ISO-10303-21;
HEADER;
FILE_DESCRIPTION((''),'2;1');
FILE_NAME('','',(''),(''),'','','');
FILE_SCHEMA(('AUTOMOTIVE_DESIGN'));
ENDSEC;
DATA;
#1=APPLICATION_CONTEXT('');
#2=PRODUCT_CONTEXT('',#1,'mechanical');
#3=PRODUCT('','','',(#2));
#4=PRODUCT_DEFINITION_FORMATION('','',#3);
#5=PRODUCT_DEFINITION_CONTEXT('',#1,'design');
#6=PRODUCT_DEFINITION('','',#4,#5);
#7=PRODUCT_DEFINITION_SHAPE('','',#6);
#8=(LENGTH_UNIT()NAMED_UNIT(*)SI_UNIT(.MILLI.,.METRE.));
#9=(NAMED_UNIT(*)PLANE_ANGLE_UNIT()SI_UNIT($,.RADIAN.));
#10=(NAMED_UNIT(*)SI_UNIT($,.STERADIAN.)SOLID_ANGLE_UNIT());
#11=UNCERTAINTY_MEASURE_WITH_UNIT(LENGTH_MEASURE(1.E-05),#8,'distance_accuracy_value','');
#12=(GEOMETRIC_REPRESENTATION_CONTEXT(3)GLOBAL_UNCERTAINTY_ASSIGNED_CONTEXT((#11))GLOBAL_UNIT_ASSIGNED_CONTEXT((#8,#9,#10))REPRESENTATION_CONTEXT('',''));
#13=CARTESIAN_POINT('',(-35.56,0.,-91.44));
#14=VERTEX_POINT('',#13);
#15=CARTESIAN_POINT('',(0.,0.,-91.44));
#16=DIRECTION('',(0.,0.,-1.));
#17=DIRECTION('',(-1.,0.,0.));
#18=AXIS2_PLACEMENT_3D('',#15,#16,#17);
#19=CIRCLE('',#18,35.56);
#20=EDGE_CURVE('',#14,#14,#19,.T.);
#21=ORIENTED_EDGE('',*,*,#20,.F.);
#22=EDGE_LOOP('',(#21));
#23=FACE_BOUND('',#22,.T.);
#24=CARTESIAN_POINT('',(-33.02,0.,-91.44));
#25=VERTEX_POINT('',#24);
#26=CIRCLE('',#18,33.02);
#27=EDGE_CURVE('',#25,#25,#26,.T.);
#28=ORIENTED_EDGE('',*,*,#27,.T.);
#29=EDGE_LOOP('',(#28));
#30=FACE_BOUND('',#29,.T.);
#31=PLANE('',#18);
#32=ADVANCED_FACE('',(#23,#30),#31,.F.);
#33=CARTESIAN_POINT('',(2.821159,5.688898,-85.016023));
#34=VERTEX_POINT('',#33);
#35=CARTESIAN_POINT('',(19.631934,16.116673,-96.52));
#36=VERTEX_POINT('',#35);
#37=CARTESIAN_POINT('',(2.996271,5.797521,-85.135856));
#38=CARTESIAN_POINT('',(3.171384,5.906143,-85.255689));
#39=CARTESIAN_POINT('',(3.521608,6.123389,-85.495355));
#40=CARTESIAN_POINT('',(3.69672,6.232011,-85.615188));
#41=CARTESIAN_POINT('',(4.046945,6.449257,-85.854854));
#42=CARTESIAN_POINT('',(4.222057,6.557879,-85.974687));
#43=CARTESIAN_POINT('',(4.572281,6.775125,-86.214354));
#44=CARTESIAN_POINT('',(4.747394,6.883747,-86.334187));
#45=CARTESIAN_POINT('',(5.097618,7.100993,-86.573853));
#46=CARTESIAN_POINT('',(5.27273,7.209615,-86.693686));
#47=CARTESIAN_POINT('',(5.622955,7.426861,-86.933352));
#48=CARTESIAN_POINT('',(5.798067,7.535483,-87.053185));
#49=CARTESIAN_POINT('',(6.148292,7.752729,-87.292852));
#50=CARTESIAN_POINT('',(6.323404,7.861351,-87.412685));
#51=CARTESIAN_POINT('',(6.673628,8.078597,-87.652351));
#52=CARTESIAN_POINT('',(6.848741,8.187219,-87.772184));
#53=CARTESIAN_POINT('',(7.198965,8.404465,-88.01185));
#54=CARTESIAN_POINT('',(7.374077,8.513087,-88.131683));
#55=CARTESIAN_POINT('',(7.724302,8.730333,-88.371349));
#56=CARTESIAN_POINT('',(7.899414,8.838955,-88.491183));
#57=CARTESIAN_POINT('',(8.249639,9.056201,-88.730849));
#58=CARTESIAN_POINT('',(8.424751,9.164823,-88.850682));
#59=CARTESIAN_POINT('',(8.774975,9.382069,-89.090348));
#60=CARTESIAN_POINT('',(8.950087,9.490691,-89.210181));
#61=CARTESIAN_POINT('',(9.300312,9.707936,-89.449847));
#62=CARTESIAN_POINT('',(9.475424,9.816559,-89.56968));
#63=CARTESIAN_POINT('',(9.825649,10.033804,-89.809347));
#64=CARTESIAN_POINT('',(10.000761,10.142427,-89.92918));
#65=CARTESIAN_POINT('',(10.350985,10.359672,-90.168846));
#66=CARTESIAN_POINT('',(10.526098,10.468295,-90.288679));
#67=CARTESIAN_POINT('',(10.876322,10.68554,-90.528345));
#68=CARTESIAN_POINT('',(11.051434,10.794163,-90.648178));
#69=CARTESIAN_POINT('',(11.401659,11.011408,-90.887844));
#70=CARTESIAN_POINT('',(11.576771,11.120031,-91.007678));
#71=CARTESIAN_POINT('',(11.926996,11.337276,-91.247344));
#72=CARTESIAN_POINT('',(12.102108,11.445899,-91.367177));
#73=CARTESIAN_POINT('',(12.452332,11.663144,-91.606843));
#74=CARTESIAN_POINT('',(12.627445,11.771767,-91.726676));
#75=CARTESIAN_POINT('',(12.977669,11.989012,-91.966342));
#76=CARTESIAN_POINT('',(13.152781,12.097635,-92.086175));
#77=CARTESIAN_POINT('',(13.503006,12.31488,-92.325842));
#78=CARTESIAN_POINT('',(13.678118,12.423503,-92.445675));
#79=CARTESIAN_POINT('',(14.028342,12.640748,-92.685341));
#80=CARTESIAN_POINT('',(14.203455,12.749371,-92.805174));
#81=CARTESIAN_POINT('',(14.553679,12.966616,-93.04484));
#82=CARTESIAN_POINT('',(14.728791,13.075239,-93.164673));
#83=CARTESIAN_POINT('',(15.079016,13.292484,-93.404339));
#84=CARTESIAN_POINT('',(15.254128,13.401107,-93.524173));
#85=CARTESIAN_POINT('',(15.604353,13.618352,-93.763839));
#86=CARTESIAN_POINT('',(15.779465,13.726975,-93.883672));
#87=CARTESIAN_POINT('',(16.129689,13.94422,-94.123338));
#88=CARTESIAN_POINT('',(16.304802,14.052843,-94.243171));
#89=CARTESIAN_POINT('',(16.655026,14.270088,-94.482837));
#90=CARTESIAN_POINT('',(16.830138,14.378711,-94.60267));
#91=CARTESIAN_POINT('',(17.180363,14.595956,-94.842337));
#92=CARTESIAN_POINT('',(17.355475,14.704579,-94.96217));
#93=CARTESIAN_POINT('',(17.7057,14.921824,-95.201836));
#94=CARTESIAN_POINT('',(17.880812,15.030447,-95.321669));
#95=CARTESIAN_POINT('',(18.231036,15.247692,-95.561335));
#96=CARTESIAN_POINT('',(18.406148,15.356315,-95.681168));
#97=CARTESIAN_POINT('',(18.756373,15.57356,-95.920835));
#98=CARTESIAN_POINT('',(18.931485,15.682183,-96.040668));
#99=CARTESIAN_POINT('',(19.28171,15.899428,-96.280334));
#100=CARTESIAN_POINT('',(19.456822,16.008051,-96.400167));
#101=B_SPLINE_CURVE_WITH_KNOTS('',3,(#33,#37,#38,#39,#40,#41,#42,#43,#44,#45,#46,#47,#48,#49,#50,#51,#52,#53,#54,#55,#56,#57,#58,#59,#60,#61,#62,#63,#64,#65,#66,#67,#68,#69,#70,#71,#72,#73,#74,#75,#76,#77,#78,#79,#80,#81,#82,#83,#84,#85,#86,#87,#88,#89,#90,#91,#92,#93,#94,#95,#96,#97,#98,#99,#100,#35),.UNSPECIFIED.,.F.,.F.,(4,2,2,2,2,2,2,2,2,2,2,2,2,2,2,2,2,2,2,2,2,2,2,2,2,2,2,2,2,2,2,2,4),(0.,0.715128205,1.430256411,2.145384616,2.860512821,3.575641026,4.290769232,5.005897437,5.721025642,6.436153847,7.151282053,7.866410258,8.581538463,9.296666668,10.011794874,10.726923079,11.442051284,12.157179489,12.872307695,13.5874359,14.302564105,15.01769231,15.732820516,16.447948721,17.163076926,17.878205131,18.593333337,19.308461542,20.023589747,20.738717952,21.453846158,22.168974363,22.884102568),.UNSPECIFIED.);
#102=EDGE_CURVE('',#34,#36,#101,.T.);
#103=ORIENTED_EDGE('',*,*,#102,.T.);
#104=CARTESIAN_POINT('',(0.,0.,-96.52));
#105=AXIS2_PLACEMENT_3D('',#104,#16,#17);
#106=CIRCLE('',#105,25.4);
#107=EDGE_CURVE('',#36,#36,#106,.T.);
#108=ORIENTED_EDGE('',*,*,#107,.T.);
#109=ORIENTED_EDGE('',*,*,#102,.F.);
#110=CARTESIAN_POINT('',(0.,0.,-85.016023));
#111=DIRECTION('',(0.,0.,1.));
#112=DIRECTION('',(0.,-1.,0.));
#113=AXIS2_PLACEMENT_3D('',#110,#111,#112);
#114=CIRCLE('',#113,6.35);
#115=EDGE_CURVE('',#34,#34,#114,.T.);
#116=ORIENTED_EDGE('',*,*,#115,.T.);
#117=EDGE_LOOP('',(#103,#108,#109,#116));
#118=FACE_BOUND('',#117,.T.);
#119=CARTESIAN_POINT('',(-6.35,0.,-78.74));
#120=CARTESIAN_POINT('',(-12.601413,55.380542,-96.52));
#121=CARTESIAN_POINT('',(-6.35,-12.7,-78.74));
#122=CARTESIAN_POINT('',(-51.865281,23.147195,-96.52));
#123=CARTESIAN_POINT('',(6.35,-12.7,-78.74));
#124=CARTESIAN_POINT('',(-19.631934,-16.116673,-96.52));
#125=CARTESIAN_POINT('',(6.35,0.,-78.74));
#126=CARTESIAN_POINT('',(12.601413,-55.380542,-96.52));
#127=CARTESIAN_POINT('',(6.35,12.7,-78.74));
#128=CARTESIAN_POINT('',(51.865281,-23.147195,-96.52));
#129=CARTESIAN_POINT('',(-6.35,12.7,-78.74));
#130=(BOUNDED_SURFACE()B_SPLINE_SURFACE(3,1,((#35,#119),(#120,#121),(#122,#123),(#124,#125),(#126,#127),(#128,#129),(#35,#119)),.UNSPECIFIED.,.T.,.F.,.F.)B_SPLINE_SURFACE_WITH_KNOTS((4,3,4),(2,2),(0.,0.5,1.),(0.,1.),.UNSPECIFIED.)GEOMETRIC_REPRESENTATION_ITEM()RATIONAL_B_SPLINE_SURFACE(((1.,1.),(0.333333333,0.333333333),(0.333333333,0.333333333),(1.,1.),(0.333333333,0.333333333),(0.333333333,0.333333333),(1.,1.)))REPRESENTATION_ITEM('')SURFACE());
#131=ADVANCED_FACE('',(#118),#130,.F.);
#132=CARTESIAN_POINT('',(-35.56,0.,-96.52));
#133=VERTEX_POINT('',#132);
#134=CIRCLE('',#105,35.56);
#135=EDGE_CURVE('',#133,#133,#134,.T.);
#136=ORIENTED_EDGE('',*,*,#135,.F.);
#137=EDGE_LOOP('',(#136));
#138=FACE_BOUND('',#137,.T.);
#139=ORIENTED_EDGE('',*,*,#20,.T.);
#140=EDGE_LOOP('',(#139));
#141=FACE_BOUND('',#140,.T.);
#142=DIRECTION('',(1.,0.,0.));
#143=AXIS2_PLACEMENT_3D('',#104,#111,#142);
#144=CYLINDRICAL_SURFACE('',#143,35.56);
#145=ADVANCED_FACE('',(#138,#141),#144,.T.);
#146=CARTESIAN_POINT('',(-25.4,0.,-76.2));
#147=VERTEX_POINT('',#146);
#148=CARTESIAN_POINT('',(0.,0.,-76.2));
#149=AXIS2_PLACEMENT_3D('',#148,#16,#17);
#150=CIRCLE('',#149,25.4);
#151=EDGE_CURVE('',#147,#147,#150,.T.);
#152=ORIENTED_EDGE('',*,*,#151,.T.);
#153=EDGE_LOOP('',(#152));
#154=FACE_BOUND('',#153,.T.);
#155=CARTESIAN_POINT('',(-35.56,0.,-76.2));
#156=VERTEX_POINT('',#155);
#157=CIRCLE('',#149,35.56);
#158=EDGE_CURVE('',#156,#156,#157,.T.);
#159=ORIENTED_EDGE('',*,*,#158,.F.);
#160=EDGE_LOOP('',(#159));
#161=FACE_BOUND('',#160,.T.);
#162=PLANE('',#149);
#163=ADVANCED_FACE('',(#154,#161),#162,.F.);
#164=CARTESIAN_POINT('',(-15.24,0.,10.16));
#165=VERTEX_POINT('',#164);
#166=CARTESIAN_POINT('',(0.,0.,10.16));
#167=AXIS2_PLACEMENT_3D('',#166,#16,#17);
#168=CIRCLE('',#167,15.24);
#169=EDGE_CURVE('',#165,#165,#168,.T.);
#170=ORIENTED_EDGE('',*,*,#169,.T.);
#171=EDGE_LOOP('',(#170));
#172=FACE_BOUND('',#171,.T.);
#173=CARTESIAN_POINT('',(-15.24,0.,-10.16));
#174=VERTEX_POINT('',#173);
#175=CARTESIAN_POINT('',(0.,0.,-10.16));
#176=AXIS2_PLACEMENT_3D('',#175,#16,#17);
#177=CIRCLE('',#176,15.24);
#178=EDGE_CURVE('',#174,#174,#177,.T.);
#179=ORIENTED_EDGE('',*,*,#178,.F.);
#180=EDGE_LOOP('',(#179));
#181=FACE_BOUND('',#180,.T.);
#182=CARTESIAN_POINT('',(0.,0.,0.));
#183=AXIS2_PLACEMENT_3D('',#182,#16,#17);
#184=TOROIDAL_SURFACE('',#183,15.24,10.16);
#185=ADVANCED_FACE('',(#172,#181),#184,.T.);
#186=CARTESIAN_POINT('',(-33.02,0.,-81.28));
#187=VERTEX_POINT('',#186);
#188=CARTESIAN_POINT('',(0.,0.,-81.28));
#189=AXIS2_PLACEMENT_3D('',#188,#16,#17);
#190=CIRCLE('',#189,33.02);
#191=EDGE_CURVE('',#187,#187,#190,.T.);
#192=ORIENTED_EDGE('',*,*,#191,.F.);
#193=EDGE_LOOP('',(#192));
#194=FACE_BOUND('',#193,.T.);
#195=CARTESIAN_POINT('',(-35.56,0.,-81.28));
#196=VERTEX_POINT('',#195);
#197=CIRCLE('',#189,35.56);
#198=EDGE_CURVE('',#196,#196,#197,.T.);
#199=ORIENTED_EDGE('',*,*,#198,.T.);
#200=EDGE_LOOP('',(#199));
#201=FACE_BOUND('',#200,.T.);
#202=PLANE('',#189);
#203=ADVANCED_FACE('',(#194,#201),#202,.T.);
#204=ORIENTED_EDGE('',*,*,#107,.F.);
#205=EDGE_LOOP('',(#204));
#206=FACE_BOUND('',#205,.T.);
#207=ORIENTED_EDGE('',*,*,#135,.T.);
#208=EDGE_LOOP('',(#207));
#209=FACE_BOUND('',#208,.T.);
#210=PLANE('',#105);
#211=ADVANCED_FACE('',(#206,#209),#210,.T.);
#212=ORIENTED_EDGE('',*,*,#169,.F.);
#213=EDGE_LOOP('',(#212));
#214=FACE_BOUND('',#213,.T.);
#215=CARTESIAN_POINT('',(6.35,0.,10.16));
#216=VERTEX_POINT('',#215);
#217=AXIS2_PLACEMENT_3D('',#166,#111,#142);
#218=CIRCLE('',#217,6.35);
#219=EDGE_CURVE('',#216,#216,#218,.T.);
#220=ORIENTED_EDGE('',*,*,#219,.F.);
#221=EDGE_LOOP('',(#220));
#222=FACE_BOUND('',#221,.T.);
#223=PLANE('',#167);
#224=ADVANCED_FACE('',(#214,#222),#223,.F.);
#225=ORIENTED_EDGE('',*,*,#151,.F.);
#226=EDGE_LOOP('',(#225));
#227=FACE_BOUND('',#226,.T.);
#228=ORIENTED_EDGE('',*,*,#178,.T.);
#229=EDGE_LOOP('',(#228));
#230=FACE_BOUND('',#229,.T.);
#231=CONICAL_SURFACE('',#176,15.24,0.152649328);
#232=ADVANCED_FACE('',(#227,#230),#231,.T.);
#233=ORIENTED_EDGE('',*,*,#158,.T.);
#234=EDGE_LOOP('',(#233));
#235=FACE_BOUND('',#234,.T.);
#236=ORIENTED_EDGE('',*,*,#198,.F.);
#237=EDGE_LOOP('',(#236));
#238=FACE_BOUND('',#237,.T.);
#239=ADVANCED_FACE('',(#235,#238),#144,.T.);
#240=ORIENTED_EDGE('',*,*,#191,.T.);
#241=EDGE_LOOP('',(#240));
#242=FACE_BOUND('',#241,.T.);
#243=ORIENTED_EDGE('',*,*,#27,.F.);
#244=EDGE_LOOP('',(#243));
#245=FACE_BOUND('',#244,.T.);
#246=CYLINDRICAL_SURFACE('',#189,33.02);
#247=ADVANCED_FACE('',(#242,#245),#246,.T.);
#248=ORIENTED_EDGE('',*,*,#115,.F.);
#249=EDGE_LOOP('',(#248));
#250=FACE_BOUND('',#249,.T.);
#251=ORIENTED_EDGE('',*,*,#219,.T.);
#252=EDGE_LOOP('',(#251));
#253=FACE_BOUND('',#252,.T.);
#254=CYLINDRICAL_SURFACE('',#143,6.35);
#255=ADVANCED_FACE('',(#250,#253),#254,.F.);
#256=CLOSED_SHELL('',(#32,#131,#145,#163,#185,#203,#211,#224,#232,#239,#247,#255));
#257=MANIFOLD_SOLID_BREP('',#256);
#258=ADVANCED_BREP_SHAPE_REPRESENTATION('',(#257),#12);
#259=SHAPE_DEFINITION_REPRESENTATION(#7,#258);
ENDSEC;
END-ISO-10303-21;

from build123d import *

# Parameters (mm, degrees)
SKETCH5_R           = 15.24
SKETCH6_R           = 25.4
SKETCH7_R           = 35.56
BOSS_EXTRUDE1_DEPTH = 20.32
CUT_EXTRUDE4_START  = -10.16
SKETCH8_R           = 35.56
SKETCH8_R_2         = 33.02
CUT_EXTRUDE4_DEPTH  = 10.16
SKETCH9_R           = 30.48
CUT_EXTRUDE5_DEPTH  = 17.78
SKETCH4_R           = 6.35
CUT_EXTRUDE6_DEPTH  = 118.939177545
FILLET1_R           = 2.54
BOSS_EXTRUDE2_START = 17.78
SKETCH12_R          = 30.48
BOSS_EXTRUDE2_DEPTH = 17.78
SKETCH14_R          = 6.35
CUT_EXTRUDE7_DEPTH  = 118.939177696


with BuildPart() as part:
    # Sketch3 → Revolve1 (revolve)
    with BuildSketch(Plane(origin=(0, 0, 0), x_dir=(1, 0, 0), z_dir=(0, 1, 0)), mode=Mode.PRIVATE) as revolve1_sk:
        with BuildLine():
            Line((0, 10.16), (0, -10.16))
            Line((0, -10.16), (15.24, -10.16))
            ThreePointArc((15.24, -10.16), (25.4, 0), (15.24, 10.16))
            Line((15.24, 10.16), (0, 10.16))
        make_face()
    revolve(revolve1_sk.sketch.rotate(Axis((0, 0, -50.309770133), (0, 0, 1)), 180), axis=Axis((0, 0, -50.309770133), (0, 0, 1)))

    # Sketch5 → Loft1 section 0
    with BuildSketch(Plane(origin=(0, 0, -10.16), x_dir=(-1, 0, 0), z_dir=(0, 0, -1))):
        Circle(SKETCH5_R)
    # Sketch6 → Loft1 section 1
    with BuildSketch(Plane.XY.offset(-76.2)):
        Circle(SKETCH6_R)
    loft()

    # Sketch7 → Boss-Extrude1 (add)
    with BuildSketch(Plane(origin=(0, 0, -76.2), x_dir=(-1, 0, 0), z_dir=(0, 0, -1))):
        Circle(SKETCH7_R)
    extrude(amount=BOSS_EXTRUDE1_DEPTH)

    # Sketch8 → Cut-Extrude4 (cut)
    with BuildSketch(Plane(origin=(0, 0, -91.44), x_dir=(-1, 0, 0), z_dir=(0, 0, -1)).offset(CUT_EXTRUDE4_START)):
        Circle(SKETCH8_R)
        Circle(SKETCH8_R_2, mode=Mode.SUBTRACT)
    extrude(amount=CUT_EXTRUDE4_DEPTH, mode=Mode.SUBTRACT)

    # Sketch9 → Cut-Extrude5 (cut)
    with BuildSketch(Plane(origin=(0, 0, -96.52), x_dir=(-1, 0, 0), z_dir=(0, 0, -1))):
        Circle(SKETCH9_R)
    extrude(amount=-CUT_EXTRUDE5_DEPTH, mode=Mode.SUBTRACT)

    # Sketch4 → Cut-Extrude6 (cut, through all)
    with BuildSketch(Plane.XY.offset(10.16)):
        Circle(SKETCH4_R)
    extrude(amount=-CUT_EXTRUDE6_DEPTH, mode=Mode.SUBTRACT)

    # Fillet1
    fillet1_edges = [part.edges().sort_by_distance(p)[0] for p in [
        (30.48, 0, -78.74),
    ]]
    fillet(fillet1_edges, radius=FILLET1_R)

    # Sketch12 → Boss-Extrude2 (add)
    with BuildSketch(Plane(origin=(0, 0, -78.74), x_dir=(-1, 0, 0), z_dir=(0, 0, -1)).offset(BOSS_EXTRUDE2_START)):
        Circle(SKETCH12_R)
    extrude(amount=-BOSS_EXTRUDE2_DEPTH)

    # Cut-Loft2: read off the stored shape, not the designer's step
    # Cut-Loft2: loft between two sections, ruled curve by curve
    cut_loft2_from = [
        Edge.make_bspline([(19.631934156, 16.116673394, -96.52), (-12.601412631, 55.380541707, -96.52), (-51.865280944, 23.147194919, -96.52), (-19.631934156, -16.116673394, -96.52), (12.601412631, -55.380541707, -96.52), (51.865280944, -23.147194919, -96.52), (19.631934156, 16.116673394, -96.52)], [0, 0, 0, 0, 0.5, 0.5, 0.5, 1, 1, 1, 1], 3, [1, 0.333333333, 0.333333333, 1, 0.333333333, 0.333333333, 1]),
    ]
    cut_loft2_to = [
        Edge.make_bspline([(-6.35, 0, -78.74), (-6.35, -12.7, -78.74), (6.35, -12.7, -78.74), (6.35, 0, -78.74), (6.35, 12.7, -78.74), (-6.35, 12.7, -78.74), (-6.35, 0, -78.74)], [0, 0, 0, 0, 0.5, 0.5, 0.5, 1, 1, 1, 1], 3, [1, 0.333333333, 0.333333333, 1, 0.333333333, 0.333333333, 1]),
    ]
    cut_loft2 = Solid(Shell([*[Face.make_surface_from_curves(cut_loft2_from[k], cut_loft2_to[k]) for k in range(1)], Face(Wire(cut_loft2_from)), Face(Wire(cut_loft2_to))]))
    add(cut_loft2, mode=Mode.SUBTRACT)

    # Sketch14 → Cut-Extrude7 (cut, through all)
    with BuildSketch(Plane.XY.offset(10.16)):
        Circle(SKETCH14_R)
    extrude(amount=-CUT_EXTRUDE7_DEPTH, mode=Mode.SUBTRACT)


solid = part.part
